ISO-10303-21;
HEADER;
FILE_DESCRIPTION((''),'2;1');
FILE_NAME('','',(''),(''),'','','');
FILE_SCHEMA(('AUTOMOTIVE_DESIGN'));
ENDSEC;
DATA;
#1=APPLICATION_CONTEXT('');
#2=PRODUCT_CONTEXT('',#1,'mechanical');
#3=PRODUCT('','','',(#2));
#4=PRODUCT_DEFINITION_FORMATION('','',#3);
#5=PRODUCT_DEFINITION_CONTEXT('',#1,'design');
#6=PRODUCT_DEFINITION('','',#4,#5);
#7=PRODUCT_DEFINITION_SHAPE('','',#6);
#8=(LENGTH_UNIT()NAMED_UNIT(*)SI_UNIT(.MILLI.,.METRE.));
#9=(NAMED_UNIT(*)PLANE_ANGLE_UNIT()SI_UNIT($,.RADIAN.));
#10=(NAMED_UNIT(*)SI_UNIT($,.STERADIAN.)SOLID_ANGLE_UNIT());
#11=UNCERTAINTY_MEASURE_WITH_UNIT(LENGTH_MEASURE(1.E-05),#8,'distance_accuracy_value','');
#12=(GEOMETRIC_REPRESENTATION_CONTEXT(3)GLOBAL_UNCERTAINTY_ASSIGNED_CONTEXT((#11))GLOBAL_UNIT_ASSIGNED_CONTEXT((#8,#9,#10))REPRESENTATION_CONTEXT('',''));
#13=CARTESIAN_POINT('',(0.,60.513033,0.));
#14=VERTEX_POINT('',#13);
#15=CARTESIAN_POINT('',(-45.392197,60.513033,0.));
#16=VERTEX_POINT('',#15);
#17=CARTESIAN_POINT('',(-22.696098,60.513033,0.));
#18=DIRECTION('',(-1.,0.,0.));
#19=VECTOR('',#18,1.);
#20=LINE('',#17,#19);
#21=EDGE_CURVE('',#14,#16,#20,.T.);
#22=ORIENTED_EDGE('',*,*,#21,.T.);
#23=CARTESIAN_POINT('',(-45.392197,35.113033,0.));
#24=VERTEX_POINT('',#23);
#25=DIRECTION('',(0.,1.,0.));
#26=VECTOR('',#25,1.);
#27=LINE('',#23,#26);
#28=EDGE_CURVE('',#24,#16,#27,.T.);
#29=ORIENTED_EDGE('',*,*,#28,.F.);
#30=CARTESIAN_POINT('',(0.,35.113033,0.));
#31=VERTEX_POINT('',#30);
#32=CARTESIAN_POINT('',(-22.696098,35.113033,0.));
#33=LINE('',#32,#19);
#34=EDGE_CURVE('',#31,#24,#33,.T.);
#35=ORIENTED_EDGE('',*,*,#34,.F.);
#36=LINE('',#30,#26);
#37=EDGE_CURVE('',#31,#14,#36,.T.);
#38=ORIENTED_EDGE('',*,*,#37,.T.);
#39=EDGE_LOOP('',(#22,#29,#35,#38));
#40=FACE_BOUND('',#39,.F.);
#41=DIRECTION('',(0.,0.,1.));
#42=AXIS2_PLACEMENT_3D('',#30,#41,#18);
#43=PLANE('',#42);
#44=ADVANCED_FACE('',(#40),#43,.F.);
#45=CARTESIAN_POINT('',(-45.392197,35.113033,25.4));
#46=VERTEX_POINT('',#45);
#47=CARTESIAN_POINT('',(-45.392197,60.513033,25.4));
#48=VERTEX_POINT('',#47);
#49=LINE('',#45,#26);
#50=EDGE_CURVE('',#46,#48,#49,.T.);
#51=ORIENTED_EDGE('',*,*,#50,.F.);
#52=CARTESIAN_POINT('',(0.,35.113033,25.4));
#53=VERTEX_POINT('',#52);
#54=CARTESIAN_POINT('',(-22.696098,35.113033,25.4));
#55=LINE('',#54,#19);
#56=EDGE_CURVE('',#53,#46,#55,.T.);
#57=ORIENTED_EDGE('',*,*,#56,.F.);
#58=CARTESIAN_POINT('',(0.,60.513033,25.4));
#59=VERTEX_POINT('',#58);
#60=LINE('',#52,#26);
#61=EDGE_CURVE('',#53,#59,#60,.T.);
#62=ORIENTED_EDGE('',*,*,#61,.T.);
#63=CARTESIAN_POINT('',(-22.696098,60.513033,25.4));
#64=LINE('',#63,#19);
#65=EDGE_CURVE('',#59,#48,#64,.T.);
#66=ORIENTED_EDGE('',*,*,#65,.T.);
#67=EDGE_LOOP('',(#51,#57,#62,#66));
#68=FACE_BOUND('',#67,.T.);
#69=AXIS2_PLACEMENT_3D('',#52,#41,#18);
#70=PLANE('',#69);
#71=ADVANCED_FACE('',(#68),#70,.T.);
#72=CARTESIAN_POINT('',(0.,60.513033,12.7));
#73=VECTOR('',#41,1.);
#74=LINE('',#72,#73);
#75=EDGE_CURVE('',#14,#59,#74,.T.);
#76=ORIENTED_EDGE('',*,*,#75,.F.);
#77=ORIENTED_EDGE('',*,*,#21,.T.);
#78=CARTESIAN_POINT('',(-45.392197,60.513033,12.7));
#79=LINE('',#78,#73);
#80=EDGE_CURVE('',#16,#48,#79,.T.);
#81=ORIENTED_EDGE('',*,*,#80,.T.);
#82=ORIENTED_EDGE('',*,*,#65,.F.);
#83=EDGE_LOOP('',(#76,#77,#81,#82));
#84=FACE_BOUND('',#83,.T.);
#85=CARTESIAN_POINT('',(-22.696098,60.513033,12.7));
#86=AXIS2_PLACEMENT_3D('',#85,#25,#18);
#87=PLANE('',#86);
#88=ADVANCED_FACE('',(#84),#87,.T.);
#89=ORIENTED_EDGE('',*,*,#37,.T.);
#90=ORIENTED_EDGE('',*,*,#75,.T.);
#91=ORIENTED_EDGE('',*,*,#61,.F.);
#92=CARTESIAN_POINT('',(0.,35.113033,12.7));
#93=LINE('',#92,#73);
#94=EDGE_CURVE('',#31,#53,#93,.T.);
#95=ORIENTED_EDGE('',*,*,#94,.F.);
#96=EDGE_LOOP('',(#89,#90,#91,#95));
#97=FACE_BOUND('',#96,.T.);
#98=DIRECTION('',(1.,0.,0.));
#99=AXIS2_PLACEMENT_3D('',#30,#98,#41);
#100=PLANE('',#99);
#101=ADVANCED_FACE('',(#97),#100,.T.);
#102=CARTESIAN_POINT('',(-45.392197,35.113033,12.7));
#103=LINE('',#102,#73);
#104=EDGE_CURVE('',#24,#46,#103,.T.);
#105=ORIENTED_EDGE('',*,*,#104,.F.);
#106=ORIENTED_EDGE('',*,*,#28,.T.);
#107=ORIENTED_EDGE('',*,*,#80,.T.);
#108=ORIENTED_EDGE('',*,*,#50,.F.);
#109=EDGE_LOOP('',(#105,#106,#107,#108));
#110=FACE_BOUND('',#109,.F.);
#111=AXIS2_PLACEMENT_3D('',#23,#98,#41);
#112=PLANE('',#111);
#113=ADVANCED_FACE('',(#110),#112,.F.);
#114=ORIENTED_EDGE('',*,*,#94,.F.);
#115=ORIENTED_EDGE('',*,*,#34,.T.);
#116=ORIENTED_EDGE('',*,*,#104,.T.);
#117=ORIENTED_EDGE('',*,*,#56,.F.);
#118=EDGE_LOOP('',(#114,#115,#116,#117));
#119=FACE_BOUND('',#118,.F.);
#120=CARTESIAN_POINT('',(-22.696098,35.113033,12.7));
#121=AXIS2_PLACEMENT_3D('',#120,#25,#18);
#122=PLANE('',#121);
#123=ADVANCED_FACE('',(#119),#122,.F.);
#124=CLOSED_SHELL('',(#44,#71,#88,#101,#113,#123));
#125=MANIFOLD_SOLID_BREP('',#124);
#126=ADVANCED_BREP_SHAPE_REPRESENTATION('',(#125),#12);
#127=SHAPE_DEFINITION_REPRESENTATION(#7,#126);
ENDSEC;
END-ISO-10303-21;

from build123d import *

# Parameters (mm, degrees)
F1_E0_TOP_W = 45.3921966255
F1_E0_TOP_H = 25.4
F2_DEPTH    = 25.4


with BuildPart() as f2:
    # F1_E0_top (on explicit) → F2 (new body)
    with BuildSketch(Plane(origin=(0, 35.1130329072, 0), x_dir=(-1, 0, 0), z_dir=(0, 1, 0))):
        with Locations((22.6960983127, 12.7)):
            Rectangle(F1_E0_TOP_W, F1_E0_TOP_H)
    extrude(amount=F2_DEPTH)


solid = f2.part
